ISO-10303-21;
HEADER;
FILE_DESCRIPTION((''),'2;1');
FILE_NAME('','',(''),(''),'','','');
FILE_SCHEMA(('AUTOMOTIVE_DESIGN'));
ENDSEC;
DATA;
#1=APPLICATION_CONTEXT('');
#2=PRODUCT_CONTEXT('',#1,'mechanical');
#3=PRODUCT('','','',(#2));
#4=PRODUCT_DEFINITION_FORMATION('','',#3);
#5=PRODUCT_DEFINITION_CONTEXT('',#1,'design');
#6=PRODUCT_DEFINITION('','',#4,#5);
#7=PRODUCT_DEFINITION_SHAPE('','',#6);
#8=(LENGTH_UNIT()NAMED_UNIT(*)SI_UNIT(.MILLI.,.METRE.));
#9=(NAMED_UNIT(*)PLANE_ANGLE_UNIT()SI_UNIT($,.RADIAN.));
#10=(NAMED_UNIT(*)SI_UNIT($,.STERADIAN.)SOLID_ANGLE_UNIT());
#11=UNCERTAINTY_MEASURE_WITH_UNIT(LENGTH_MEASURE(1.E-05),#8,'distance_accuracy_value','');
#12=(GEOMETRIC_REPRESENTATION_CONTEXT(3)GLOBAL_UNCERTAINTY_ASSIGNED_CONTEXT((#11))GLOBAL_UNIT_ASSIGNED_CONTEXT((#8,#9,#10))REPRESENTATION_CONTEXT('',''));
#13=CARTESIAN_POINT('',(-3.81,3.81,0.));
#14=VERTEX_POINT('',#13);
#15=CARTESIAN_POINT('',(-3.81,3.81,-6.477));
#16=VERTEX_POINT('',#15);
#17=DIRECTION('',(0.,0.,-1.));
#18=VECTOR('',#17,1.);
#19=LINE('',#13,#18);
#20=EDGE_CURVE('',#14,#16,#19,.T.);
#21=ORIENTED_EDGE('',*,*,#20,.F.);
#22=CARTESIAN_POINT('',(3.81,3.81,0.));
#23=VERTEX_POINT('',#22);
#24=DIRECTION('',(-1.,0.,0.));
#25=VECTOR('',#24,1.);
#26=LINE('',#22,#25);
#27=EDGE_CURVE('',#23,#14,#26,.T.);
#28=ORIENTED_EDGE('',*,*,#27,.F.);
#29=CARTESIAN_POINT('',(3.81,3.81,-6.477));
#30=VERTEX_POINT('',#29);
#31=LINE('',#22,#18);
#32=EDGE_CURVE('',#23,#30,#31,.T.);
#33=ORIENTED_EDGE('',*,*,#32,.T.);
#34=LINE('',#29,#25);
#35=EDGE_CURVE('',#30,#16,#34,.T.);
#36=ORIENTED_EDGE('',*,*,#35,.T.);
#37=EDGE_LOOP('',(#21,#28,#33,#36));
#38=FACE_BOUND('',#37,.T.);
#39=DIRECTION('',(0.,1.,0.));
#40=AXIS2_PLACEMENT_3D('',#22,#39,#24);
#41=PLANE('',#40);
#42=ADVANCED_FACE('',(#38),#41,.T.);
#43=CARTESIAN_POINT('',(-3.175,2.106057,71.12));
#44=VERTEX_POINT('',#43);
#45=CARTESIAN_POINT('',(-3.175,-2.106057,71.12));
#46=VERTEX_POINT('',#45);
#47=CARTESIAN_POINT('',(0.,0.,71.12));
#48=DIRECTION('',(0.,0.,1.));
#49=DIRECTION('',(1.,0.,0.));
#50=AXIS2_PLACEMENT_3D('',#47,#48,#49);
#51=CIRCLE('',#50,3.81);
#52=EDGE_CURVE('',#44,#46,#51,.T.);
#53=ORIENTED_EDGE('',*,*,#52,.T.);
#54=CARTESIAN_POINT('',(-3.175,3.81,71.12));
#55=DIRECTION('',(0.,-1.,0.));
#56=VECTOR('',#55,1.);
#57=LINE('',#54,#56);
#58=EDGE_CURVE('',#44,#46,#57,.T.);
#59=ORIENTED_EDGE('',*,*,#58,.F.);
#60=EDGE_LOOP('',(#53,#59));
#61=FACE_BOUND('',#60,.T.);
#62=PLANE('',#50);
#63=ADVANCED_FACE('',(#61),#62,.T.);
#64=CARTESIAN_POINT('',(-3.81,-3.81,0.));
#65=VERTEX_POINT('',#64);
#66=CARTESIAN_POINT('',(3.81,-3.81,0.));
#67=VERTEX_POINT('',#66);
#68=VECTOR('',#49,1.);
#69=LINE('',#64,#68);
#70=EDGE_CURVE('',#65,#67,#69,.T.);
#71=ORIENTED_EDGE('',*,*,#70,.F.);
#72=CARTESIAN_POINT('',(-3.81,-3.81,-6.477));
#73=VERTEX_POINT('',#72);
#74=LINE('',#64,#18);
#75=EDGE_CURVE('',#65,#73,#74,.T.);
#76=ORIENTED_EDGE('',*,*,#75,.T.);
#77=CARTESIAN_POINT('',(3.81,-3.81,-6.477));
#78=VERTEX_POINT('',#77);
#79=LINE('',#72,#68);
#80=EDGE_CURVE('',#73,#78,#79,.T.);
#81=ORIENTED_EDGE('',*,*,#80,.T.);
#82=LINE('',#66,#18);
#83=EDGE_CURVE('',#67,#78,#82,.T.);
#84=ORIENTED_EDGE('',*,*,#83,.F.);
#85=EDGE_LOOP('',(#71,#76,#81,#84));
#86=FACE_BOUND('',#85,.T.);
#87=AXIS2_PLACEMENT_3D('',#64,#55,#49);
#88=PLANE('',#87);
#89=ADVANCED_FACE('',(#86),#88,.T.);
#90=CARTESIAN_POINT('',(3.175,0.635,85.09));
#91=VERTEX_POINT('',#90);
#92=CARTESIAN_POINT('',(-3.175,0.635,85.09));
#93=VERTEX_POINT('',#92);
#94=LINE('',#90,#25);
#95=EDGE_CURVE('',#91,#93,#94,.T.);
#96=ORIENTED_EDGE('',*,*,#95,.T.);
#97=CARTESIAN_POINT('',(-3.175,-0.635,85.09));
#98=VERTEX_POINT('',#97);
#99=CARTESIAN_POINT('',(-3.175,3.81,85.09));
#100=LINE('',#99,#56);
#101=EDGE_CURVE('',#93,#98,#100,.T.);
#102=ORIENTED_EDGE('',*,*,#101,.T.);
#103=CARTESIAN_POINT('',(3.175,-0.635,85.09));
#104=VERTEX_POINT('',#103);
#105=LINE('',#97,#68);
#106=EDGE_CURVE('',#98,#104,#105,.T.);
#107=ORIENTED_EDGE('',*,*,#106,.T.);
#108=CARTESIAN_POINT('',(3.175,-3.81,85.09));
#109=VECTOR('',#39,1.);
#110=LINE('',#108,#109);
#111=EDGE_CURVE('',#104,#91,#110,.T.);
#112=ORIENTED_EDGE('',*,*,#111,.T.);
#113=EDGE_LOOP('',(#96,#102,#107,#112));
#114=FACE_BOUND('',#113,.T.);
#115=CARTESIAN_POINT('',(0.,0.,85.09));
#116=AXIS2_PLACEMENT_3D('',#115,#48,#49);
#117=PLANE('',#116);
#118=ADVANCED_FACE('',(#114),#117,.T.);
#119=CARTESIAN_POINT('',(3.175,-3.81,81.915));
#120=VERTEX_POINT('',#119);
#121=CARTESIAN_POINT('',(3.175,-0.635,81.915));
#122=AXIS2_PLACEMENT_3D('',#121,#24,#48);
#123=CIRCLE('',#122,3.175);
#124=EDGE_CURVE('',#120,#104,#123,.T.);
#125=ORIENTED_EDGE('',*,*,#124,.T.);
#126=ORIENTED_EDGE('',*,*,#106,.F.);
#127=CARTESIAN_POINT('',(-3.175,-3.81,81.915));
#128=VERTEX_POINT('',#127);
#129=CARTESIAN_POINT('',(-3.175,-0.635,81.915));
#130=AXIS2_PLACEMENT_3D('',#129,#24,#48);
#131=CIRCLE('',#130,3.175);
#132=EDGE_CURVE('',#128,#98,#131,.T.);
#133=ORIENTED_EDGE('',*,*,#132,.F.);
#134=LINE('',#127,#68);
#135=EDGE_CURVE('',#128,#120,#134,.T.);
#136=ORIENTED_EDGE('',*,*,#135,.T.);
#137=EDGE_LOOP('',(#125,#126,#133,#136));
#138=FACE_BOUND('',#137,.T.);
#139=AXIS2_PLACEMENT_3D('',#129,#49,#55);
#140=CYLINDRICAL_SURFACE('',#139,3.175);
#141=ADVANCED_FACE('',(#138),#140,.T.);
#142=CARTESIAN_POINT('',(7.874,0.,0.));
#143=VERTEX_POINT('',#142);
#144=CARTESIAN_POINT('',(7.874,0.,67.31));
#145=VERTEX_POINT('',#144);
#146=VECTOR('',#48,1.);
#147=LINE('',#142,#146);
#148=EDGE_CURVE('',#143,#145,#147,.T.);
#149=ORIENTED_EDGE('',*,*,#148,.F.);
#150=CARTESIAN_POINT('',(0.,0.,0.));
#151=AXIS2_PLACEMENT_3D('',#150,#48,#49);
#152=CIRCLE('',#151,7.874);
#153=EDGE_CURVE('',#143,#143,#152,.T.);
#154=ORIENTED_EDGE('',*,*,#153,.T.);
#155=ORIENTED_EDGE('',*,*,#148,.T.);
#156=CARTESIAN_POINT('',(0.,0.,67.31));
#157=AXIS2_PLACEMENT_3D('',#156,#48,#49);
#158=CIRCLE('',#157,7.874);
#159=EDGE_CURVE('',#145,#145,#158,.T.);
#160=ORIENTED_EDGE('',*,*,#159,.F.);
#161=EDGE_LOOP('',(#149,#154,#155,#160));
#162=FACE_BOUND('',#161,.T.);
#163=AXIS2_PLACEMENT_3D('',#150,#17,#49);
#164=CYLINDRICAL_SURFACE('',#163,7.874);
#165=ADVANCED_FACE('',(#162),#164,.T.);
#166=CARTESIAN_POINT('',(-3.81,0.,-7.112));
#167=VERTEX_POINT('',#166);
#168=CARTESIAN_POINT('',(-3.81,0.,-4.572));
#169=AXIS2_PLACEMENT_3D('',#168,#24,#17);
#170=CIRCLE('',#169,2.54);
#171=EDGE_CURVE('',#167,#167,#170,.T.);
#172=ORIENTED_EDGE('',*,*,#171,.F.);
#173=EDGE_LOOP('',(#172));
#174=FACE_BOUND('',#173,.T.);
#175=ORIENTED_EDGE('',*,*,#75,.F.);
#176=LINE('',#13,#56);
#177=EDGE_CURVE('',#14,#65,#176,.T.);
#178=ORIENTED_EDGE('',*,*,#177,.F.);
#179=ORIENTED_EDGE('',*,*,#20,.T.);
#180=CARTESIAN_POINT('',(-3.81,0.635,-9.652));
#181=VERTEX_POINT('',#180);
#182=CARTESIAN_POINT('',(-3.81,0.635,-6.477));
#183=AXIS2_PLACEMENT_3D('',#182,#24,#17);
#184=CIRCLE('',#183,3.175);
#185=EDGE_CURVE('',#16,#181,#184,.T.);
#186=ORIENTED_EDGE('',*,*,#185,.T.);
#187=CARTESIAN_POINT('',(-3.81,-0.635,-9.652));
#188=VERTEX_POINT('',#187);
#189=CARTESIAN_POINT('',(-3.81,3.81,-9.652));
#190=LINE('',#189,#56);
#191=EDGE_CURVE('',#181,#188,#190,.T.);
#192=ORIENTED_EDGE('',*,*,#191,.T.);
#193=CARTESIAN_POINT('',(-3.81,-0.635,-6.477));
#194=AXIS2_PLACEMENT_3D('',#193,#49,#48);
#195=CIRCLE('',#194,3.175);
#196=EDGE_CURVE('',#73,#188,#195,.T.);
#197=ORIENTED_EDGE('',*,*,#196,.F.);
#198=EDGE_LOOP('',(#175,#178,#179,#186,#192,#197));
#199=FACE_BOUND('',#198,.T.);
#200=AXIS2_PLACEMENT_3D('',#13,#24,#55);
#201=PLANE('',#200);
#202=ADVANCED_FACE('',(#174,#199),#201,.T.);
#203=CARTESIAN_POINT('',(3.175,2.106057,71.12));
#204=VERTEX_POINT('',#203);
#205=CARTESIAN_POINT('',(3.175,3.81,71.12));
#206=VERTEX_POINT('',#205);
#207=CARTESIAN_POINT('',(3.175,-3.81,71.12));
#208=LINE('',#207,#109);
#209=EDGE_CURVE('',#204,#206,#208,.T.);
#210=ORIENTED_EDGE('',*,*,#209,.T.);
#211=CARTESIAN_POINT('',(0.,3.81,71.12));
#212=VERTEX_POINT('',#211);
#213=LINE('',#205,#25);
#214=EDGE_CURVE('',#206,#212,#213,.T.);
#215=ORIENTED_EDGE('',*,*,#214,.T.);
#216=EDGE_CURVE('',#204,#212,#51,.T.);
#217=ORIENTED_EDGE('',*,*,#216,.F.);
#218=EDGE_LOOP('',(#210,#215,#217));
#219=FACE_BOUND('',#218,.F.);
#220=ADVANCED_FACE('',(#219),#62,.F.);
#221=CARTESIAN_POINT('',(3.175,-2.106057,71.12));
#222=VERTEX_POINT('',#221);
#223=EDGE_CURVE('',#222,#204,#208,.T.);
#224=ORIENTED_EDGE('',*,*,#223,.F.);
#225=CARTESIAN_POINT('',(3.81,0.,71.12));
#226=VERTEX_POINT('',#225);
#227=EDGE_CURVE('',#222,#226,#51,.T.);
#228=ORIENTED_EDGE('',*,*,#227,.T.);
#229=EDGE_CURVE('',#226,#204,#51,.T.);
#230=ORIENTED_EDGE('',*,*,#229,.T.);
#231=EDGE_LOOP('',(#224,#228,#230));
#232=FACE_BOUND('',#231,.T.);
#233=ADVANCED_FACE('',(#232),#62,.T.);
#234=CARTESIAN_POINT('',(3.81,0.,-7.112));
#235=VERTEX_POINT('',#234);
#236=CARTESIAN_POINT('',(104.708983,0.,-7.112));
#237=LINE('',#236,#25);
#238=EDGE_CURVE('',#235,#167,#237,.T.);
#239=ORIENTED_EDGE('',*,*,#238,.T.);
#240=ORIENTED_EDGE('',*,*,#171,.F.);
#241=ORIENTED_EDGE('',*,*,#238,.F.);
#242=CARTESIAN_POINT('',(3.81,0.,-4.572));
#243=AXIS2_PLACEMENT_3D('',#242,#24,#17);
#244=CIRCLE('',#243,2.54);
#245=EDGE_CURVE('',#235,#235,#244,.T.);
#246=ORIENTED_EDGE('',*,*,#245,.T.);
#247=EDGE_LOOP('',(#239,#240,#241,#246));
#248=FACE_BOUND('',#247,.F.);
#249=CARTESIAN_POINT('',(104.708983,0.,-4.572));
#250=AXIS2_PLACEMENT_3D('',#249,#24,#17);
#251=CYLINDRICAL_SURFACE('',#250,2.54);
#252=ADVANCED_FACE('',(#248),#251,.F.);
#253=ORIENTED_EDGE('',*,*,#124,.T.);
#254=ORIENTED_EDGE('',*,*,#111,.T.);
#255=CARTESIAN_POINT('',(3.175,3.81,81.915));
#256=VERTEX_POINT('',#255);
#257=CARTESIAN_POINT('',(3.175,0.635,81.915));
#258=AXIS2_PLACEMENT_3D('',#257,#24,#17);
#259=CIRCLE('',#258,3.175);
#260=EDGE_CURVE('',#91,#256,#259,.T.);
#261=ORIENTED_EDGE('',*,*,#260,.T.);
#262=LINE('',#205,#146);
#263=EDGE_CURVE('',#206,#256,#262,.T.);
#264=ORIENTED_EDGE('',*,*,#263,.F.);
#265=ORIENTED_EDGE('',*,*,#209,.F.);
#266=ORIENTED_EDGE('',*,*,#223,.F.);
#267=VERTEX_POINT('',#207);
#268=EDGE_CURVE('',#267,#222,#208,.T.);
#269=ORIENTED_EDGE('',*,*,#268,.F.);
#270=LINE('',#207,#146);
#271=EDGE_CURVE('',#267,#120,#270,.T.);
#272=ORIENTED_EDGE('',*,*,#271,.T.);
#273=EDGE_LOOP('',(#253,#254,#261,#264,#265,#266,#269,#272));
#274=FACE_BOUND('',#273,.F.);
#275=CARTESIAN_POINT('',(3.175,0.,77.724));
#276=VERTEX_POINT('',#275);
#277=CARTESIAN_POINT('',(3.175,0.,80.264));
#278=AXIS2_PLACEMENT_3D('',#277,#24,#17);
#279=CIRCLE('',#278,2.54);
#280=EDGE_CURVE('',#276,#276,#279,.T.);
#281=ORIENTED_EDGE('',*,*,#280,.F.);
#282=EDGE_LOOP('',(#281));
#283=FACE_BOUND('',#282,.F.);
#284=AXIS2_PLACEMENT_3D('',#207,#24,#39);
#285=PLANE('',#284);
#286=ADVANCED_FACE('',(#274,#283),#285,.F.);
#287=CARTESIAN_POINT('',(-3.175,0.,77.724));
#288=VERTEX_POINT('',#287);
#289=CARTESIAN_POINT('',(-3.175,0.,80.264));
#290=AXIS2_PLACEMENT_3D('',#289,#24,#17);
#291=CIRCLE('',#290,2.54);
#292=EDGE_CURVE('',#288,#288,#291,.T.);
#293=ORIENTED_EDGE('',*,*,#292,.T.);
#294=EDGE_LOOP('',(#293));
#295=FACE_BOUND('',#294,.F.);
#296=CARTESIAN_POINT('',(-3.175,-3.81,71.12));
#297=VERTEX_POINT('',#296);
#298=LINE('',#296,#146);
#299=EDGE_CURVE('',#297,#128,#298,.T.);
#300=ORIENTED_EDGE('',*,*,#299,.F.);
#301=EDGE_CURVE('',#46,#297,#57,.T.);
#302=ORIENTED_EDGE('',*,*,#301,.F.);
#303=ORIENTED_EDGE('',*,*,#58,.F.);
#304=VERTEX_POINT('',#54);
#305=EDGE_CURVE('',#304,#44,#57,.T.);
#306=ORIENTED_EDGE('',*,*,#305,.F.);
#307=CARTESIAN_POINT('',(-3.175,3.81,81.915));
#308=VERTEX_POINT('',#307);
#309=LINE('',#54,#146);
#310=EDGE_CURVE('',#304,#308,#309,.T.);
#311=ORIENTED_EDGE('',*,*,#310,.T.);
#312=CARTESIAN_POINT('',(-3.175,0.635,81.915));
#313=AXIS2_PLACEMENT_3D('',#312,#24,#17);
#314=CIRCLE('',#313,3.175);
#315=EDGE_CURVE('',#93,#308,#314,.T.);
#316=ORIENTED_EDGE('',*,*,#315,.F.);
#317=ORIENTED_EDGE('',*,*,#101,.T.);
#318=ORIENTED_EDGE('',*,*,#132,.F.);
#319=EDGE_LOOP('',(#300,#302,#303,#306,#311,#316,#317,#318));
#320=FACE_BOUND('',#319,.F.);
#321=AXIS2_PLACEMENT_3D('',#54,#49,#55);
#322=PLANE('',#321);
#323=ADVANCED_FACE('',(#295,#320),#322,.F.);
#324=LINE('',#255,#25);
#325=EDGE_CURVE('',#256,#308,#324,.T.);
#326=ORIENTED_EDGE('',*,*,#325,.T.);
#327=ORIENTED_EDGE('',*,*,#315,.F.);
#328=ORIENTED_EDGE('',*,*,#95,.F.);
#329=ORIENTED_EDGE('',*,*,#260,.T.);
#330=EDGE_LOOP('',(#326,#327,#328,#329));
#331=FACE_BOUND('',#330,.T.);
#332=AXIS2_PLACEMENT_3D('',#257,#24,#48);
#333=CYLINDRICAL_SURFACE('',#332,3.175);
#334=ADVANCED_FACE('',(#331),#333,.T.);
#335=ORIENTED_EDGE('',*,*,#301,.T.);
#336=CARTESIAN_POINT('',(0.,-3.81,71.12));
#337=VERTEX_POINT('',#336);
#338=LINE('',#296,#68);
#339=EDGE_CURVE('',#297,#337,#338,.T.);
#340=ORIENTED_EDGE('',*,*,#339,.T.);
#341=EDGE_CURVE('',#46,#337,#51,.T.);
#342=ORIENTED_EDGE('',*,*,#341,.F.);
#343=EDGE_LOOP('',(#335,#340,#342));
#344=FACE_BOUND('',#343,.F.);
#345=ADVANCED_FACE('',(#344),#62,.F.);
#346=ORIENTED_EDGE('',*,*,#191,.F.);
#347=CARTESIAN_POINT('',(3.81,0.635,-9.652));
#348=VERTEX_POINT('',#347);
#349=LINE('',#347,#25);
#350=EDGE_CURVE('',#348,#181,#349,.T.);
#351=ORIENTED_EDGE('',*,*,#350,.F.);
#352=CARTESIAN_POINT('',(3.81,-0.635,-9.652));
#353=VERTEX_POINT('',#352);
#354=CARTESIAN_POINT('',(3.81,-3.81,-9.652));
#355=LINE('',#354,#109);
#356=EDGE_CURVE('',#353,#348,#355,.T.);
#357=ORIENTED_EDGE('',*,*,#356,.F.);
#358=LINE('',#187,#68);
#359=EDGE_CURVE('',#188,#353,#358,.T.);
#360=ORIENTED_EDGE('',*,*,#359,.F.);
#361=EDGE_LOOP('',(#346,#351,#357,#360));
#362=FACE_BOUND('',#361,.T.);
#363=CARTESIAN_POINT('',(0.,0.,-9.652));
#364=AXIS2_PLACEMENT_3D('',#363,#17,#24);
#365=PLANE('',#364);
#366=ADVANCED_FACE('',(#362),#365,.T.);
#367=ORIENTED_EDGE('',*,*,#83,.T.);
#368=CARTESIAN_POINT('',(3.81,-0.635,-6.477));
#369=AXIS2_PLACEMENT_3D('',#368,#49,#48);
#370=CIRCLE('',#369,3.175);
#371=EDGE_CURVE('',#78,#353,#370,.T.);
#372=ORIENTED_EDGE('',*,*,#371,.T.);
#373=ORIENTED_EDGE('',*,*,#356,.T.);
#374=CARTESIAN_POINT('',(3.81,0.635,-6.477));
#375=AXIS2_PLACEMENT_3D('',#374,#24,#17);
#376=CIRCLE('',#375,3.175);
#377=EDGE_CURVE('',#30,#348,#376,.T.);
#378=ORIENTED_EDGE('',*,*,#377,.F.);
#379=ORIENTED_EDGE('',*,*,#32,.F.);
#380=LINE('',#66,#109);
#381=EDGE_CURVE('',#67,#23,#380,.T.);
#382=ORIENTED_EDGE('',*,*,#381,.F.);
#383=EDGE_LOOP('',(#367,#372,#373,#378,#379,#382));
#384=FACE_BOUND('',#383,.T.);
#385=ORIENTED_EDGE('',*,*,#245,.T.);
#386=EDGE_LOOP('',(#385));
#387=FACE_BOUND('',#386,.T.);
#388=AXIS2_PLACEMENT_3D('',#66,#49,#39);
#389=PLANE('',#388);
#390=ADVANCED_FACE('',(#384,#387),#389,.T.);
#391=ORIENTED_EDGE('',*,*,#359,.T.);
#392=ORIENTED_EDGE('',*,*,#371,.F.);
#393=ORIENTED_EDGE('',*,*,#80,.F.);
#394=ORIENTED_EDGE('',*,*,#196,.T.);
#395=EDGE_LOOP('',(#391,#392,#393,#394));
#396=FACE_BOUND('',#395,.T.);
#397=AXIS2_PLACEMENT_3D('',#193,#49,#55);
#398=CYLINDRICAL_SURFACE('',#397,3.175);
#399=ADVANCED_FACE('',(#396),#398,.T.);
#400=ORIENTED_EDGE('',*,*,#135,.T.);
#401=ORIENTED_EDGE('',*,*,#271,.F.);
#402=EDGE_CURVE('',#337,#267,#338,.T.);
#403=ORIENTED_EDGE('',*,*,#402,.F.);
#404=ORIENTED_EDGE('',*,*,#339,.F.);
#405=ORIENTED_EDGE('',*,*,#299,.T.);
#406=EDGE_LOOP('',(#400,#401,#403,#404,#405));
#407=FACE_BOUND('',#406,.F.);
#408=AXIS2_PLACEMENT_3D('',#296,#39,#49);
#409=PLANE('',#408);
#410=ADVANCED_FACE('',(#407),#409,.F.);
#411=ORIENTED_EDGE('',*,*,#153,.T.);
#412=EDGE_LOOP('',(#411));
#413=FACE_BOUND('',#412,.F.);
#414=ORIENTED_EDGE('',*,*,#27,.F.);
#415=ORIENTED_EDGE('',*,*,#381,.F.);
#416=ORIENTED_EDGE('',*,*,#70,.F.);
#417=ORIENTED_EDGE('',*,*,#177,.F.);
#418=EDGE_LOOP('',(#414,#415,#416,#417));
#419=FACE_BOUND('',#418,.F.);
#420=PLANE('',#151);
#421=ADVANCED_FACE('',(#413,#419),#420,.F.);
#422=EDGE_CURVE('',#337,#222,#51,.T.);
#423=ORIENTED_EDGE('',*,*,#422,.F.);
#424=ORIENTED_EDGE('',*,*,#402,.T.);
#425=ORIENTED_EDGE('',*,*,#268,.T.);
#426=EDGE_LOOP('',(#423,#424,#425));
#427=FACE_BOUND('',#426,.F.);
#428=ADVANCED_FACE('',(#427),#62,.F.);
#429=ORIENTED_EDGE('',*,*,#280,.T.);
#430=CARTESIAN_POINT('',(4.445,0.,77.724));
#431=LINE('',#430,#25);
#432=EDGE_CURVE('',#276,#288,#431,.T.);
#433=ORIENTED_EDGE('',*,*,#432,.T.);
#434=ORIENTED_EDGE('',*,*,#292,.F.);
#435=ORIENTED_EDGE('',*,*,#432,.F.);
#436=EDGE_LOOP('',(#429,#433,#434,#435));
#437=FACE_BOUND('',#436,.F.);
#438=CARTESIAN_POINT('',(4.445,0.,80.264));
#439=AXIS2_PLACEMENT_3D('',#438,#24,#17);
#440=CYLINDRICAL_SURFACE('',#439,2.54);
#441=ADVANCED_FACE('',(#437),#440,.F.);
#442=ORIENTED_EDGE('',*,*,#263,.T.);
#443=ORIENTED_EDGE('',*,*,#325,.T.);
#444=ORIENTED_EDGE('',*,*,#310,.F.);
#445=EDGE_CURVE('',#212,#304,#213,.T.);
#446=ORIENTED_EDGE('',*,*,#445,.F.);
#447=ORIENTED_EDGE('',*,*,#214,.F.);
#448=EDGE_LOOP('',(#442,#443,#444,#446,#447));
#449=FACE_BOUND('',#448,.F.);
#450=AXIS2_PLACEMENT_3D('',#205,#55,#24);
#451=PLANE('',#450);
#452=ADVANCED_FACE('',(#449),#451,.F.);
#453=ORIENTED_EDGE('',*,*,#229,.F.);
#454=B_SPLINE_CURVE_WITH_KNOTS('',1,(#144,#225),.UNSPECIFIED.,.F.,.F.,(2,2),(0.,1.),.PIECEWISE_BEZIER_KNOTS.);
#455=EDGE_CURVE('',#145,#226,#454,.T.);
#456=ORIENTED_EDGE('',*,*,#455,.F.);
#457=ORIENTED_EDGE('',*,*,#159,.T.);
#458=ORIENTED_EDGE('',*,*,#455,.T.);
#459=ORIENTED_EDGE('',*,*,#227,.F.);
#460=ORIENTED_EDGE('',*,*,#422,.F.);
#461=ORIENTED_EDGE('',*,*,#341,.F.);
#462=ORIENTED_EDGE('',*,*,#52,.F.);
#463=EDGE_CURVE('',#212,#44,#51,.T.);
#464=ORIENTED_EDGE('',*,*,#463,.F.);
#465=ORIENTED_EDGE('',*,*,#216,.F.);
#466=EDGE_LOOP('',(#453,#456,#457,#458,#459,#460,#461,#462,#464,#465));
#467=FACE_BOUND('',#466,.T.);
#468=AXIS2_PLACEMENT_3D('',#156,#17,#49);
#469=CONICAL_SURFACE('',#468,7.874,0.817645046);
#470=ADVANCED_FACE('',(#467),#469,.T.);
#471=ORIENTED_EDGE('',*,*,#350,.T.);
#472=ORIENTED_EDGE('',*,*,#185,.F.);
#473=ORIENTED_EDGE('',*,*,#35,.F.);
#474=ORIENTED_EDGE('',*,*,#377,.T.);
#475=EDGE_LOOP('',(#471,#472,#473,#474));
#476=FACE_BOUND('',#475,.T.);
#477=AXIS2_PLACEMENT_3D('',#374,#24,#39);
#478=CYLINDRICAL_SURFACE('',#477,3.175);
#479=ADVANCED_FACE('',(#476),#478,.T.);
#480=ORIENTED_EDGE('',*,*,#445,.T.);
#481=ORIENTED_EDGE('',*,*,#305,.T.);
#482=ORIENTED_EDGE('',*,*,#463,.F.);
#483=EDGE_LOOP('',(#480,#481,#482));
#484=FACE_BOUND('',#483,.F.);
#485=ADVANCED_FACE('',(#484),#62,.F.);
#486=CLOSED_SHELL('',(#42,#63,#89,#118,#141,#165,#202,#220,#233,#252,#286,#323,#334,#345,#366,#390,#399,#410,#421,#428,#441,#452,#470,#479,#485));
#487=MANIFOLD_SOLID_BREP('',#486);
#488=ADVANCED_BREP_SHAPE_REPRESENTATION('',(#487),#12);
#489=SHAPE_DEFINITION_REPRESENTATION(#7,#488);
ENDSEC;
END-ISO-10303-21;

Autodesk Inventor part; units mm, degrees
sketch "Sketch1" plane through (0, 0, 0) normal (0, 0, 1) x (1, 0, 0)
  circle A0 centre (0, 0) radius 7.874
  dimension "d0" = 15.748
extrude "Extrusion1" add sketch "Sketch1" along normal blind 67.31
ref_plane "Work Plane1" through (0, 0, 71.12) normal (0, 0, 1) x (1, 0, 0)
sketch "Sketch3" plane through (0, 0, 71.12) normal (0, 0, 1) x (1, 0, 0)
  circle A0 centre (0, 0) radius 3.81
  dimension "d4" = 7.62
loft "Loft1" add profiles "Sketch3" section 1 edges at (-7.874, 0, 67.31)
ref_plane "Work Plane5" through (0, 0, 85.09) normal (0, 0, 1) x (1, 0, 0)
ref_plane "Work Plane8" through (4.445, 0, 85.09) normal (1, 0, 0) x (0, 1, 0)
sketch "Sketch6" plane through (4.445, 0, 85.09) normal (1, 0, 0) x (0, 1, 0)
  line L0 (4.445, 0) -> (-4.445, 0) projected
  point P0 (0, -85.09)
  point P1 (0, -4.826)
  dimension "d23" = 4.826
ref_plane "Work Plane6" through (4.445, 0, 85.09) normal (1, 0, 0) x (0, 1, 0)
sketch "Sketch8" plane through (4.445, 0, 85.09) normal (1, 0, 0) x (0, 1, 0)
  line L0 (-5.08, -94.742) -> (5.08, -94.742) projected
  point P0 (0, -85.09)
  point P1 (0, -89.662)
  dimension "d31" = 5.08
sketch "Sketch9" plane through (0, 0, 0) normal (0, 0, -1) x (-1, 0, 0)
  line L0 (-3.81, 3.81) -> (3.81, 3.81)
  line L1 (3.81, 3.81) -> (3.81, -3.81)
  line L2 (3.81, -3.81) -> (-3.81, -3.81)
  line L3 (-3.81, -3.81) -> (-3.81, 3.81)
  line L4 (-3.81, 3.81) -> (3.81, -3.81) construction
  line L5 (3.81, 3.81) -> (-3.81, -3.81) construction
  point P0 (0, 0)
  dimension "d39" = 7.62
  dimension "d40" = 7.62
extrude "Extrusion6" add sketch "Sketch9" along normal blind 9.652
hole "Hole3" at (4.445, 0, -4.572) direction (-1, 0, 0) diameter 5.08 end through all both
sketch "Sketch10" plane through (0, 0, 71.12) normal (0, 0, 1) x (1, 0, 0)
  line L0 (3.175, 3.81) -> (-3.175, 3.81)
  line L1 (-3.175, 3.81) -> (-3.175, -3.81)
  line L2 (-3.175, -3.81) -> (3.175, -3.81)
  line L3 (3.175, -3.81) -> (3.175, 3.81)
  line L4 (3.175, 3.81) -> (-3.175, -3.81) construction
  line L5 (-3.175, 3.81) -> (3.175, -3.81) construction
  point P0 (0, 0)
  point P1 (0, 0)
  dimension "d50" = 6.35
  dimension "d51" = 7.62
extrude "Extrusion7" add sketch "Sketch10" along normal blind 13.97
hole "Hole4" at (4.445, 0, 80.264) direction (-1, 0, 0) diameter 5.08 end through all
fillet "Fillet1" radius 3.175 2 edges at (0, 3.81, 85.09) (0, -3.81, 85.09)
fillet "Fillet2" radius 3.175 2 edges at (0, 3.81, -9.652) (0, -3.81, -9.652)
properties part number "MockShock2"
